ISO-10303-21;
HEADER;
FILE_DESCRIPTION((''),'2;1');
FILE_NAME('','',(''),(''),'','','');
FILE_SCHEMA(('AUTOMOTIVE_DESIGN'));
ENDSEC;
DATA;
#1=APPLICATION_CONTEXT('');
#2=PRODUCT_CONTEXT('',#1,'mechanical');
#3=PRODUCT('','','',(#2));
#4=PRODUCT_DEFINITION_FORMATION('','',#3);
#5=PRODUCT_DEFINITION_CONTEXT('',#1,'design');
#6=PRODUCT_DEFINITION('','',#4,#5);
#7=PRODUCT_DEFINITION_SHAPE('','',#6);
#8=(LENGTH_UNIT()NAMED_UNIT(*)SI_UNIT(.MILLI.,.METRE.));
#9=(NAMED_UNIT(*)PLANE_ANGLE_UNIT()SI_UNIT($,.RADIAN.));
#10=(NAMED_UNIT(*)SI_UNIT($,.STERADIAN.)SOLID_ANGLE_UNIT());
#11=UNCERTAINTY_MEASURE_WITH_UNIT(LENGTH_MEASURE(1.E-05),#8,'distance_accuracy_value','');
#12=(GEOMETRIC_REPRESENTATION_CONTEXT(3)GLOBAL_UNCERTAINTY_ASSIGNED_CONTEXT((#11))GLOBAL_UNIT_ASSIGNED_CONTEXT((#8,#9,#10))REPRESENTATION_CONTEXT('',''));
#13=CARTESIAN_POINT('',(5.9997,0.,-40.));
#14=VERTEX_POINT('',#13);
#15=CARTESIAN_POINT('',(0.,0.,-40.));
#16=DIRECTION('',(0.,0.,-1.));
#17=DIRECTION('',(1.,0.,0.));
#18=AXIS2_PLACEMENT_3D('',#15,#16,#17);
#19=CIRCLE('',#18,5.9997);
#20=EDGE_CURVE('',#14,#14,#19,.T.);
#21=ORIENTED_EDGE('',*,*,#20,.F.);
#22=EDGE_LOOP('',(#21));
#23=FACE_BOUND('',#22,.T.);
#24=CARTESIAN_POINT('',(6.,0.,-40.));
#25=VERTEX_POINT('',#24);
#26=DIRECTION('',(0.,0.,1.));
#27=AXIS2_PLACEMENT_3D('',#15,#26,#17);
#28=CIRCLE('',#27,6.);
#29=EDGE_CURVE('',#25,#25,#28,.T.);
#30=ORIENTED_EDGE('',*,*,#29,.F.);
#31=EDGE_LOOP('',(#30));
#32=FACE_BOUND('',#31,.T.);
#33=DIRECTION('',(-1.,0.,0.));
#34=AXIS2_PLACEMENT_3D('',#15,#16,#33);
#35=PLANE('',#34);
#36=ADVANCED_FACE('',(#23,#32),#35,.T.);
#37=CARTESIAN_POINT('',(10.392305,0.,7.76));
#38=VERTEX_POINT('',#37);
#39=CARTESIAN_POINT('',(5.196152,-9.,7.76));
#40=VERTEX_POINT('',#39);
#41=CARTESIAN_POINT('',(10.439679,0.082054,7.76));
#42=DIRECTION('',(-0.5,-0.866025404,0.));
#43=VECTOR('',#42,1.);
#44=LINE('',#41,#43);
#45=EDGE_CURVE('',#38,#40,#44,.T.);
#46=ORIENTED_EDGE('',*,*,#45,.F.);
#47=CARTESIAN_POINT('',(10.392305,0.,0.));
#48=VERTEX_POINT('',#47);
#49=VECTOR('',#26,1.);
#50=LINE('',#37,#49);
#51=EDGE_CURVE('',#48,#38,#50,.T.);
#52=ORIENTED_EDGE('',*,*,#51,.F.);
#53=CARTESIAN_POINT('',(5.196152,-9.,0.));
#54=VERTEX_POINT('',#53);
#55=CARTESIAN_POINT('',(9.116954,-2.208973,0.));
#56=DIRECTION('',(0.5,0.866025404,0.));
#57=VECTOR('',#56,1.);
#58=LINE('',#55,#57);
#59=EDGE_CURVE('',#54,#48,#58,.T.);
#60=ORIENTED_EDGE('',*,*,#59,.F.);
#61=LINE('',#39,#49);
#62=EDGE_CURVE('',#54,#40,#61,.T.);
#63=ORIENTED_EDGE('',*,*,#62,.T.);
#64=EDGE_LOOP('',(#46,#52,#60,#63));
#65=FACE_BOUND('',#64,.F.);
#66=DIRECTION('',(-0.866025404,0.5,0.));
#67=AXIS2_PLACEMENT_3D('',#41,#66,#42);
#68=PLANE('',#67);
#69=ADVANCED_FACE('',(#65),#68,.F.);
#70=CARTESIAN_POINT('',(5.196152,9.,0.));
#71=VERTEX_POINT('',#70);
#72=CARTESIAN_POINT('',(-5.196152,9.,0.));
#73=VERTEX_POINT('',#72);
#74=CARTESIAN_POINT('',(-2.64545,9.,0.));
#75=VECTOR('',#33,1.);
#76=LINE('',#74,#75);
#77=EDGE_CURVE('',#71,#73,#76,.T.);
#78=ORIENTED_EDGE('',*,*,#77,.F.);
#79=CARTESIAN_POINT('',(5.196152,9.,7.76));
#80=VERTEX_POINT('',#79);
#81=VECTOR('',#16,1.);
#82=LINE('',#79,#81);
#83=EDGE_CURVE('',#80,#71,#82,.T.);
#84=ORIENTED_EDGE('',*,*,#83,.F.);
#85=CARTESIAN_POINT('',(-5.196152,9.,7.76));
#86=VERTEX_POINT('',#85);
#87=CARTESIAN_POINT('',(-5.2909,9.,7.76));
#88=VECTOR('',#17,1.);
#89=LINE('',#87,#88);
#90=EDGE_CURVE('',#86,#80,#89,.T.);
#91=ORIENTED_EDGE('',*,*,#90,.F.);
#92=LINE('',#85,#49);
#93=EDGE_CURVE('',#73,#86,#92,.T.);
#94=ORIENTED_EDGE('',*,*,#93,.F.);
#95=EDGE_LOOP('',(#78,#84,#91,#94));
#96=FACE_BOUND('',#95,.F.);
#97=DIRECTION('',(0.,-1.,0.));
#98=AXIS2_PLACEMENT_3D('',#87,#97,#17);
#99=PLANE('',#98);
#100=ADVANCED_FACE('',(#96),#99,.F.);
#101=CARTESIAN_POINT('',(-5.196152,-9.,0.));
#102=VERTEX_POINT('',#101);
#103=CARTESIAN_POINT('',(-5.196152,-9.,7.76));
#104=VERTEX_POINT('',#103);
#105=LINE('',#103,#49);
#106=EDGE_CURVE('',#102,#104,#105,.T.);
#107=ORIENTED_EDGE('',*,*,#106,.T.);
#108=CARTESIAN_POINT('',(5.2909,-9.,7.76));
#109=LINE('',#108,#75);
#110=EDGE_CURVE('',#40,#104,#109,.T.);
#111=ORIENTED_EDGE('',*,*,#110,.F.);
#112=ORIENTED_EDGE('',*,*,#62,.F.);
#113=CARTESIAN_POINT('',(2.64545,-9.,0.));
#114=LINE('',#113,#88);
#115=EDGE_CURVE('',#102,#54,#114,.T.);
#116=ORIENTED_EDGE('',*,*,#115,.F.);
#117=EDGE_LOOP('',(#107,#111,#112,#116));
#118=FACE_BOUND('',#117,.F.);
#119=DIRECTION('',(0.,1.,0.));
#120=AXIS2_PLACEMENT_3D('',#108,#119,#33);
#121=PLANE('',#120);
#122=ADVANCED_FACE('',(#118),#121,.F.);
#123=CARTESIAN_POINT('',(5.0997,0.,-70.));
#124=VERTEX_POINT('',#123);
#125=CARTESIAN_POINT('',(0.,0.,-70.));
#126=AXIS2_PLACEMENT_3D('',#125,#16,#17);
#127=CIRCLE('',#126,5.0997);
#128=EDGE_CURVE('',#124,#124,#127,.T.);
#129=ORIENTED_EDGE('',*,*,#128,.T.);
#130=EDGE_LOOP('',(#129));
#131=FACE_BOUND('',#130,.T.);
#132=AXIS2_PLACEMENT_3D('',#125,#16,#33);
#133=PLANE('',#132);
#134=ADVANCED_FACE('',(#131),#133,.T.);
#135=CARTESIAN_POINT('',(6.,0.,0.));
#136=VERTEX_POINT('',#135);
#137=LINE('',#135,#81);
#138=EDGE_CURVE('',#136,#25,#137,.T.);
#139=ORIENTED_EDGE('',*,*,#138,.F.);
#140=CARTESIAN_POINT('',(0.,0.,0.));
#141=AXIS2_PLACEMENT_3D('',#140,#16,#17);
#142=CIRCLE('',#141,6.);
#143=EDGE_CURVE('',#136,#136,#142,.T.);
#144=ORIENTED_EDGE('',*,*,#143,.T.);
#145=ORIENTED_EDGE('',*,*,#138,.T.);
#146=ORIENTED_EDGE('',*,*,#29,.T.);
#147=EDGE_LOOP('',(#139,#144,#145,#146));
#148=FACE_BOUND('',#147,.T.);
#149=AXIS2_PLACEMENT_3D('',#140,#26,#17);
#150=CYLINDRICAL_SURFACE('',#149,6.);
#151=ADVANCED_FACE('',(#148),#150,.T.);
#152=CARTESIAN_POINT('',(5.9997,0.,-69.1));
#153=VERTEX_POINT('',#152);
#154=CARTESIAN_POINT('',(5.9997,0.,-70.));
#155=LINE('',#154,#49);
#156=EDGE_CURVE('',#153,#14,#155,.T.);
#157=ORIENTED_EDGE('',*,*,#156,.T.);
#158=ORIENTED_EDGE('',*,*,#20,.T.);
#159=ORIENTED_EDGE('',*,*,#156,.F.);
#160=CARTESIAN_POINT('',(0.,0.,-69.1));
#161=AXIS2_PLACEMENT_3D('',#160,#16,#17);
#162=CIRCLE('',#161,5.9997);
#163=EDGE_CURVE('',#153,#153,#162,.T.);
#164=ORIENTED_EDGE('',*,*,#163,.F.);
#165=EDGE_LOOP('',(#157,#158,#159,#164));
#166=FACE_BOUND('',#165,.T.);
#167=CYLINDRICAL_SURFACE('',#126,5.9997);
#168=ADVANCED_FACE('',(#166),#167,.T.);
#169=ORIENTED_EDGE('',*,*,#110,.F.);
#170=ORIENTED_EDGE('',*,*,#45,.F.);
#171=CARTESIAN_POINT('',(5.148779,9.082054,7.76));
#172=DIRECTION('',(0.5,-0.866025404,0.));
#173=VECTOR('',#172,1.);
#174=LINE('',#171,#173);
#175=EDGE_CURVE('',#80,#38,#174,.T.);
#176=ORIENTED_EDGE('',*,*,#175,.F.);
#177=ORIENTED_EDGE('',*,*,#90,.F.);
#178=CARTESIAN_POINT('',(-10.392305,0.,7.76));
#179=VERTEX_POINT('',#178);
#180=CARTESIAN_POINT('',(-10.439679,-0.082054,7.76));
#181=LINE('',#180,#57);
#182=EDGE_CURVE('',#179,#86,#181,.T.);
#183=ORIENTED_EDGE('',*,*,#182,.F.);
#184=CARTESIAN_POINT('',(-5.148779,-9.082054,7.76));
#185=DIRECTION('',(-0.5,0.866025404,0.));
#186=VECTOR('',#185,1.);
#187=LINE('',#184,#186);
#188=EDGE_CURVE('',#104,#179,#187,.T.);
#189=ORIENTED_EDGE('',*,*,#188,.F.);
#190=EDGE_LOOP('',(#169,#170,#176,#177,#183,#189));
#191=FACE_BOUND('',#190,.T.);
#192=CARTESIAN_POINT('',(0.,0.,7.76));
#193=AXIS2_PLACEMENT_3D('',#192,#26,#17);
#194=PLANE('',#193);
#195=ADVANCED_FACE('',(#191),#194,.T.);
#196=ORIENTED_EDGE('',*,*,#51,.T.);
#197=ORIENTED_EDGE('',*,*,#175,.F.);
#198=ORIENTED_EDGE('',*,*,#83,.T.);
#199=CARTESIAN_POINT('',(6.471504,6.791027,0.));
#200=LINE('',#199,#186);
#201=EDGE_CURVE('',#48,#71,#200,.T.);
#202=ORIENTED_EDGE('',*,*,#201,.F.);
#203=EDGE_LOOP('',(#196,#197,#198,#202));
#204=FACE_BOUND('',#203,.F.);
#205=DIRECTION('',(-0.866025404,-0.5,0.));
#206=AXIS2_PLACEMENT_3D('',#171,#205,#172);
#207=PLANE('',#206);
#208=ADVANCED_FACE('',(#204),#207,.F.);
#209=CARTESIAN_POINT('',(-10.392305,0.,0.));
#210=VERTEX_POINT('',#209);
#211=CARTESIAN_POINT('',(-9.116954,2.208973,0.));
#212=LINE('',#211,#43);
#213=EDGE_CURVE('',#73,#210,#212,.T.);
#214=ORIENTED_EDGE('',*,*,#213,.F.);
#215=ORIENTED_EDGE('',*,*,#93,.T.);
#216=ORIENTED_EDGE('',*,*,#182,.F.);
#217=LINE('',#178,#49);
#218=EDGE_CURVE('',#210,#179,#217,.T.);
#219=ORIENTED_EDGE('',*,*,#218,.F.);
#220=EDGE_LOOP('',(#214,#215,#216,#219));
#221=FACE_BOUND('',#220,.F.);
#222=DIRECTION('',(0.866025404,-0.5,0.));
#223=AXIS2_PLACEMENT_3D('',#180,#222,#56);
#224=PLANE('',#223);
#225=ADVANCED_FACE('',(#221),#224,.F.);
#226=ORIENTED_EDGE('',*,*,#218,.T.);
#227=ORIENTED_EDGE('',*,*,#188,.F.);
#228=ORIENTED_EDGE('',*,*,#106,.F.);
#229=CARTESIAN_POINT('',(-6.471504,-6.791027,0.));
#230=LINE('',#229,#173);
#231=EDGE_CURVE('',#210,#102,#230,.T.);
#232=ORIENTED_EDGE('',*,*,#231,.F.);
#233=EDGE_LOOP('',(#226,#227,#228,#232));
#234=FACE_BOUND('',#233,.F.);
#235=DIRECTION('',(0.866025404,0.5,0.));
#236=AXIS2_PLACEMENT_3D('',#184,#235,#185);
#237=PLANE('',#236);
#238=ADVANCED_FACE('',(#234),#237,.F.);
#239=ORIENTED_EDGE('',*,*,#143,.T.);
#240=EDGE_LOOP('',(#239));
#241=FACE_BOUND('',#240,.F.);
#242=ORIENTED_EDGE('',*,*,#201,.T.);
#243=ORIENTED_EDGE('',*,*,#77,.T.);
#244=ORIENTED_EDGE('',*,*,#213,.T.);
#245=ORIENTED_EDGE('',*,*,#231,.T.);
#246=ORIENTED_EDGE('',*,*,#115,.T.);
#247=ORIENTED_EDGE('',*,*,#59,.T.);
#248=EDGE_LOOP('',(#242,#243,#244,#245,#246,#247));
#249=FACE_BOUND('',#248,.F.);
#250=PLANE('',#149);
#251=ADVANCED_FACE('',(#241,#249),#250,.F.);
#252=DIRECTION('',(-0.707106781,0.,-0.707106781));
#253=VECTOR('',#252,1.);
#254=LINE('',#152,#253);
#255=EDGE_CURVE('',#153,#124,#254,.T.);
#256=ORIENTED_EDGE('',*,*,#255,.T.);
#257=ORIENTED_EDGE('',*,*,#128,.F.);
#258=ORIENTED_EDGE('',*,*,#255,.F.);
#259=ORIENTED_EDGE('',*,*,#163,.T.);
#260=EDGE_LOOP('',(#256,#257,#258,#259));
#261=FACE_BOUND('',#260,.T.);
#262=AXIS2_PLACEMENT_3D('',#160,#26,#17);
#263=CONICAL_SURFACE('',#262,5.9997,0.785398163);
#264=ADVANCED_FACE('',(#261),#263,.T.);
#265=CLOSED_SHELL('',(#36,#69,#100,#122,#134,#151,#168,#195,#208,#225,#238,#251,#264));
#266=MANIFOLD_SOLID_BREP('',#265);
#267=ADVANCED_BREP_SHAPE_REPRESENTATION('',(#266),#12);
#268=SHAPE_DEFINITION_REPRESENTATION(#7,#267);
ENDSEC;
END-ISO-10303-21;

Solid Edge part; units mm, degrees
sketch "Sketch1" plane through (0, 0, 0) normal (0, 0, 1) x (1, 0, 0)
  circle A0 centre (0, 0) radius 10.44
  dimension "D1" = 20.88
extrude "Protrusion1" add sketch "Sketch1" along normal blind 7.76
sketch "Sketch2" plane through (0, 0, 0) normal (0, 0, -1) x (1, 0, 0)
  circle A0 centre (0, 0) radius 6
extrude "Protrusion2" add sketch "Sketch2" along normal blind 70
sketch "Sketch3" plane through (0, 0, -70) normal (0, 0, -1) x (1, 0, 0)
  circle A0 centre (0, 0) radius 5.9997
extrude "Cutout1" cut sketch "Sketch3" against normal blind 30 flip side to cut
chamfer "Chamfer_1" distance 0.9 angle 45 1 edges at (-5.9997, 0, -70)
sketch "Sketch4" plane through (0, 0, 7.76) normal (0, 0, 1) x (1, 0, 0)
  line L0 (-5.2909, 9) -> (5.2909, 9)
  dimension "D1" = 18
extrude "Cutout2" cut sketch "Sketch4" against normal up to next material side at (0, 9.05, 7.76)
pattern_circular "Pattern1" count 6 over 360 about axis through (0, 0, 7.76) along (0, 0, 1) of "Cutout2"
properties part number "24104683"
